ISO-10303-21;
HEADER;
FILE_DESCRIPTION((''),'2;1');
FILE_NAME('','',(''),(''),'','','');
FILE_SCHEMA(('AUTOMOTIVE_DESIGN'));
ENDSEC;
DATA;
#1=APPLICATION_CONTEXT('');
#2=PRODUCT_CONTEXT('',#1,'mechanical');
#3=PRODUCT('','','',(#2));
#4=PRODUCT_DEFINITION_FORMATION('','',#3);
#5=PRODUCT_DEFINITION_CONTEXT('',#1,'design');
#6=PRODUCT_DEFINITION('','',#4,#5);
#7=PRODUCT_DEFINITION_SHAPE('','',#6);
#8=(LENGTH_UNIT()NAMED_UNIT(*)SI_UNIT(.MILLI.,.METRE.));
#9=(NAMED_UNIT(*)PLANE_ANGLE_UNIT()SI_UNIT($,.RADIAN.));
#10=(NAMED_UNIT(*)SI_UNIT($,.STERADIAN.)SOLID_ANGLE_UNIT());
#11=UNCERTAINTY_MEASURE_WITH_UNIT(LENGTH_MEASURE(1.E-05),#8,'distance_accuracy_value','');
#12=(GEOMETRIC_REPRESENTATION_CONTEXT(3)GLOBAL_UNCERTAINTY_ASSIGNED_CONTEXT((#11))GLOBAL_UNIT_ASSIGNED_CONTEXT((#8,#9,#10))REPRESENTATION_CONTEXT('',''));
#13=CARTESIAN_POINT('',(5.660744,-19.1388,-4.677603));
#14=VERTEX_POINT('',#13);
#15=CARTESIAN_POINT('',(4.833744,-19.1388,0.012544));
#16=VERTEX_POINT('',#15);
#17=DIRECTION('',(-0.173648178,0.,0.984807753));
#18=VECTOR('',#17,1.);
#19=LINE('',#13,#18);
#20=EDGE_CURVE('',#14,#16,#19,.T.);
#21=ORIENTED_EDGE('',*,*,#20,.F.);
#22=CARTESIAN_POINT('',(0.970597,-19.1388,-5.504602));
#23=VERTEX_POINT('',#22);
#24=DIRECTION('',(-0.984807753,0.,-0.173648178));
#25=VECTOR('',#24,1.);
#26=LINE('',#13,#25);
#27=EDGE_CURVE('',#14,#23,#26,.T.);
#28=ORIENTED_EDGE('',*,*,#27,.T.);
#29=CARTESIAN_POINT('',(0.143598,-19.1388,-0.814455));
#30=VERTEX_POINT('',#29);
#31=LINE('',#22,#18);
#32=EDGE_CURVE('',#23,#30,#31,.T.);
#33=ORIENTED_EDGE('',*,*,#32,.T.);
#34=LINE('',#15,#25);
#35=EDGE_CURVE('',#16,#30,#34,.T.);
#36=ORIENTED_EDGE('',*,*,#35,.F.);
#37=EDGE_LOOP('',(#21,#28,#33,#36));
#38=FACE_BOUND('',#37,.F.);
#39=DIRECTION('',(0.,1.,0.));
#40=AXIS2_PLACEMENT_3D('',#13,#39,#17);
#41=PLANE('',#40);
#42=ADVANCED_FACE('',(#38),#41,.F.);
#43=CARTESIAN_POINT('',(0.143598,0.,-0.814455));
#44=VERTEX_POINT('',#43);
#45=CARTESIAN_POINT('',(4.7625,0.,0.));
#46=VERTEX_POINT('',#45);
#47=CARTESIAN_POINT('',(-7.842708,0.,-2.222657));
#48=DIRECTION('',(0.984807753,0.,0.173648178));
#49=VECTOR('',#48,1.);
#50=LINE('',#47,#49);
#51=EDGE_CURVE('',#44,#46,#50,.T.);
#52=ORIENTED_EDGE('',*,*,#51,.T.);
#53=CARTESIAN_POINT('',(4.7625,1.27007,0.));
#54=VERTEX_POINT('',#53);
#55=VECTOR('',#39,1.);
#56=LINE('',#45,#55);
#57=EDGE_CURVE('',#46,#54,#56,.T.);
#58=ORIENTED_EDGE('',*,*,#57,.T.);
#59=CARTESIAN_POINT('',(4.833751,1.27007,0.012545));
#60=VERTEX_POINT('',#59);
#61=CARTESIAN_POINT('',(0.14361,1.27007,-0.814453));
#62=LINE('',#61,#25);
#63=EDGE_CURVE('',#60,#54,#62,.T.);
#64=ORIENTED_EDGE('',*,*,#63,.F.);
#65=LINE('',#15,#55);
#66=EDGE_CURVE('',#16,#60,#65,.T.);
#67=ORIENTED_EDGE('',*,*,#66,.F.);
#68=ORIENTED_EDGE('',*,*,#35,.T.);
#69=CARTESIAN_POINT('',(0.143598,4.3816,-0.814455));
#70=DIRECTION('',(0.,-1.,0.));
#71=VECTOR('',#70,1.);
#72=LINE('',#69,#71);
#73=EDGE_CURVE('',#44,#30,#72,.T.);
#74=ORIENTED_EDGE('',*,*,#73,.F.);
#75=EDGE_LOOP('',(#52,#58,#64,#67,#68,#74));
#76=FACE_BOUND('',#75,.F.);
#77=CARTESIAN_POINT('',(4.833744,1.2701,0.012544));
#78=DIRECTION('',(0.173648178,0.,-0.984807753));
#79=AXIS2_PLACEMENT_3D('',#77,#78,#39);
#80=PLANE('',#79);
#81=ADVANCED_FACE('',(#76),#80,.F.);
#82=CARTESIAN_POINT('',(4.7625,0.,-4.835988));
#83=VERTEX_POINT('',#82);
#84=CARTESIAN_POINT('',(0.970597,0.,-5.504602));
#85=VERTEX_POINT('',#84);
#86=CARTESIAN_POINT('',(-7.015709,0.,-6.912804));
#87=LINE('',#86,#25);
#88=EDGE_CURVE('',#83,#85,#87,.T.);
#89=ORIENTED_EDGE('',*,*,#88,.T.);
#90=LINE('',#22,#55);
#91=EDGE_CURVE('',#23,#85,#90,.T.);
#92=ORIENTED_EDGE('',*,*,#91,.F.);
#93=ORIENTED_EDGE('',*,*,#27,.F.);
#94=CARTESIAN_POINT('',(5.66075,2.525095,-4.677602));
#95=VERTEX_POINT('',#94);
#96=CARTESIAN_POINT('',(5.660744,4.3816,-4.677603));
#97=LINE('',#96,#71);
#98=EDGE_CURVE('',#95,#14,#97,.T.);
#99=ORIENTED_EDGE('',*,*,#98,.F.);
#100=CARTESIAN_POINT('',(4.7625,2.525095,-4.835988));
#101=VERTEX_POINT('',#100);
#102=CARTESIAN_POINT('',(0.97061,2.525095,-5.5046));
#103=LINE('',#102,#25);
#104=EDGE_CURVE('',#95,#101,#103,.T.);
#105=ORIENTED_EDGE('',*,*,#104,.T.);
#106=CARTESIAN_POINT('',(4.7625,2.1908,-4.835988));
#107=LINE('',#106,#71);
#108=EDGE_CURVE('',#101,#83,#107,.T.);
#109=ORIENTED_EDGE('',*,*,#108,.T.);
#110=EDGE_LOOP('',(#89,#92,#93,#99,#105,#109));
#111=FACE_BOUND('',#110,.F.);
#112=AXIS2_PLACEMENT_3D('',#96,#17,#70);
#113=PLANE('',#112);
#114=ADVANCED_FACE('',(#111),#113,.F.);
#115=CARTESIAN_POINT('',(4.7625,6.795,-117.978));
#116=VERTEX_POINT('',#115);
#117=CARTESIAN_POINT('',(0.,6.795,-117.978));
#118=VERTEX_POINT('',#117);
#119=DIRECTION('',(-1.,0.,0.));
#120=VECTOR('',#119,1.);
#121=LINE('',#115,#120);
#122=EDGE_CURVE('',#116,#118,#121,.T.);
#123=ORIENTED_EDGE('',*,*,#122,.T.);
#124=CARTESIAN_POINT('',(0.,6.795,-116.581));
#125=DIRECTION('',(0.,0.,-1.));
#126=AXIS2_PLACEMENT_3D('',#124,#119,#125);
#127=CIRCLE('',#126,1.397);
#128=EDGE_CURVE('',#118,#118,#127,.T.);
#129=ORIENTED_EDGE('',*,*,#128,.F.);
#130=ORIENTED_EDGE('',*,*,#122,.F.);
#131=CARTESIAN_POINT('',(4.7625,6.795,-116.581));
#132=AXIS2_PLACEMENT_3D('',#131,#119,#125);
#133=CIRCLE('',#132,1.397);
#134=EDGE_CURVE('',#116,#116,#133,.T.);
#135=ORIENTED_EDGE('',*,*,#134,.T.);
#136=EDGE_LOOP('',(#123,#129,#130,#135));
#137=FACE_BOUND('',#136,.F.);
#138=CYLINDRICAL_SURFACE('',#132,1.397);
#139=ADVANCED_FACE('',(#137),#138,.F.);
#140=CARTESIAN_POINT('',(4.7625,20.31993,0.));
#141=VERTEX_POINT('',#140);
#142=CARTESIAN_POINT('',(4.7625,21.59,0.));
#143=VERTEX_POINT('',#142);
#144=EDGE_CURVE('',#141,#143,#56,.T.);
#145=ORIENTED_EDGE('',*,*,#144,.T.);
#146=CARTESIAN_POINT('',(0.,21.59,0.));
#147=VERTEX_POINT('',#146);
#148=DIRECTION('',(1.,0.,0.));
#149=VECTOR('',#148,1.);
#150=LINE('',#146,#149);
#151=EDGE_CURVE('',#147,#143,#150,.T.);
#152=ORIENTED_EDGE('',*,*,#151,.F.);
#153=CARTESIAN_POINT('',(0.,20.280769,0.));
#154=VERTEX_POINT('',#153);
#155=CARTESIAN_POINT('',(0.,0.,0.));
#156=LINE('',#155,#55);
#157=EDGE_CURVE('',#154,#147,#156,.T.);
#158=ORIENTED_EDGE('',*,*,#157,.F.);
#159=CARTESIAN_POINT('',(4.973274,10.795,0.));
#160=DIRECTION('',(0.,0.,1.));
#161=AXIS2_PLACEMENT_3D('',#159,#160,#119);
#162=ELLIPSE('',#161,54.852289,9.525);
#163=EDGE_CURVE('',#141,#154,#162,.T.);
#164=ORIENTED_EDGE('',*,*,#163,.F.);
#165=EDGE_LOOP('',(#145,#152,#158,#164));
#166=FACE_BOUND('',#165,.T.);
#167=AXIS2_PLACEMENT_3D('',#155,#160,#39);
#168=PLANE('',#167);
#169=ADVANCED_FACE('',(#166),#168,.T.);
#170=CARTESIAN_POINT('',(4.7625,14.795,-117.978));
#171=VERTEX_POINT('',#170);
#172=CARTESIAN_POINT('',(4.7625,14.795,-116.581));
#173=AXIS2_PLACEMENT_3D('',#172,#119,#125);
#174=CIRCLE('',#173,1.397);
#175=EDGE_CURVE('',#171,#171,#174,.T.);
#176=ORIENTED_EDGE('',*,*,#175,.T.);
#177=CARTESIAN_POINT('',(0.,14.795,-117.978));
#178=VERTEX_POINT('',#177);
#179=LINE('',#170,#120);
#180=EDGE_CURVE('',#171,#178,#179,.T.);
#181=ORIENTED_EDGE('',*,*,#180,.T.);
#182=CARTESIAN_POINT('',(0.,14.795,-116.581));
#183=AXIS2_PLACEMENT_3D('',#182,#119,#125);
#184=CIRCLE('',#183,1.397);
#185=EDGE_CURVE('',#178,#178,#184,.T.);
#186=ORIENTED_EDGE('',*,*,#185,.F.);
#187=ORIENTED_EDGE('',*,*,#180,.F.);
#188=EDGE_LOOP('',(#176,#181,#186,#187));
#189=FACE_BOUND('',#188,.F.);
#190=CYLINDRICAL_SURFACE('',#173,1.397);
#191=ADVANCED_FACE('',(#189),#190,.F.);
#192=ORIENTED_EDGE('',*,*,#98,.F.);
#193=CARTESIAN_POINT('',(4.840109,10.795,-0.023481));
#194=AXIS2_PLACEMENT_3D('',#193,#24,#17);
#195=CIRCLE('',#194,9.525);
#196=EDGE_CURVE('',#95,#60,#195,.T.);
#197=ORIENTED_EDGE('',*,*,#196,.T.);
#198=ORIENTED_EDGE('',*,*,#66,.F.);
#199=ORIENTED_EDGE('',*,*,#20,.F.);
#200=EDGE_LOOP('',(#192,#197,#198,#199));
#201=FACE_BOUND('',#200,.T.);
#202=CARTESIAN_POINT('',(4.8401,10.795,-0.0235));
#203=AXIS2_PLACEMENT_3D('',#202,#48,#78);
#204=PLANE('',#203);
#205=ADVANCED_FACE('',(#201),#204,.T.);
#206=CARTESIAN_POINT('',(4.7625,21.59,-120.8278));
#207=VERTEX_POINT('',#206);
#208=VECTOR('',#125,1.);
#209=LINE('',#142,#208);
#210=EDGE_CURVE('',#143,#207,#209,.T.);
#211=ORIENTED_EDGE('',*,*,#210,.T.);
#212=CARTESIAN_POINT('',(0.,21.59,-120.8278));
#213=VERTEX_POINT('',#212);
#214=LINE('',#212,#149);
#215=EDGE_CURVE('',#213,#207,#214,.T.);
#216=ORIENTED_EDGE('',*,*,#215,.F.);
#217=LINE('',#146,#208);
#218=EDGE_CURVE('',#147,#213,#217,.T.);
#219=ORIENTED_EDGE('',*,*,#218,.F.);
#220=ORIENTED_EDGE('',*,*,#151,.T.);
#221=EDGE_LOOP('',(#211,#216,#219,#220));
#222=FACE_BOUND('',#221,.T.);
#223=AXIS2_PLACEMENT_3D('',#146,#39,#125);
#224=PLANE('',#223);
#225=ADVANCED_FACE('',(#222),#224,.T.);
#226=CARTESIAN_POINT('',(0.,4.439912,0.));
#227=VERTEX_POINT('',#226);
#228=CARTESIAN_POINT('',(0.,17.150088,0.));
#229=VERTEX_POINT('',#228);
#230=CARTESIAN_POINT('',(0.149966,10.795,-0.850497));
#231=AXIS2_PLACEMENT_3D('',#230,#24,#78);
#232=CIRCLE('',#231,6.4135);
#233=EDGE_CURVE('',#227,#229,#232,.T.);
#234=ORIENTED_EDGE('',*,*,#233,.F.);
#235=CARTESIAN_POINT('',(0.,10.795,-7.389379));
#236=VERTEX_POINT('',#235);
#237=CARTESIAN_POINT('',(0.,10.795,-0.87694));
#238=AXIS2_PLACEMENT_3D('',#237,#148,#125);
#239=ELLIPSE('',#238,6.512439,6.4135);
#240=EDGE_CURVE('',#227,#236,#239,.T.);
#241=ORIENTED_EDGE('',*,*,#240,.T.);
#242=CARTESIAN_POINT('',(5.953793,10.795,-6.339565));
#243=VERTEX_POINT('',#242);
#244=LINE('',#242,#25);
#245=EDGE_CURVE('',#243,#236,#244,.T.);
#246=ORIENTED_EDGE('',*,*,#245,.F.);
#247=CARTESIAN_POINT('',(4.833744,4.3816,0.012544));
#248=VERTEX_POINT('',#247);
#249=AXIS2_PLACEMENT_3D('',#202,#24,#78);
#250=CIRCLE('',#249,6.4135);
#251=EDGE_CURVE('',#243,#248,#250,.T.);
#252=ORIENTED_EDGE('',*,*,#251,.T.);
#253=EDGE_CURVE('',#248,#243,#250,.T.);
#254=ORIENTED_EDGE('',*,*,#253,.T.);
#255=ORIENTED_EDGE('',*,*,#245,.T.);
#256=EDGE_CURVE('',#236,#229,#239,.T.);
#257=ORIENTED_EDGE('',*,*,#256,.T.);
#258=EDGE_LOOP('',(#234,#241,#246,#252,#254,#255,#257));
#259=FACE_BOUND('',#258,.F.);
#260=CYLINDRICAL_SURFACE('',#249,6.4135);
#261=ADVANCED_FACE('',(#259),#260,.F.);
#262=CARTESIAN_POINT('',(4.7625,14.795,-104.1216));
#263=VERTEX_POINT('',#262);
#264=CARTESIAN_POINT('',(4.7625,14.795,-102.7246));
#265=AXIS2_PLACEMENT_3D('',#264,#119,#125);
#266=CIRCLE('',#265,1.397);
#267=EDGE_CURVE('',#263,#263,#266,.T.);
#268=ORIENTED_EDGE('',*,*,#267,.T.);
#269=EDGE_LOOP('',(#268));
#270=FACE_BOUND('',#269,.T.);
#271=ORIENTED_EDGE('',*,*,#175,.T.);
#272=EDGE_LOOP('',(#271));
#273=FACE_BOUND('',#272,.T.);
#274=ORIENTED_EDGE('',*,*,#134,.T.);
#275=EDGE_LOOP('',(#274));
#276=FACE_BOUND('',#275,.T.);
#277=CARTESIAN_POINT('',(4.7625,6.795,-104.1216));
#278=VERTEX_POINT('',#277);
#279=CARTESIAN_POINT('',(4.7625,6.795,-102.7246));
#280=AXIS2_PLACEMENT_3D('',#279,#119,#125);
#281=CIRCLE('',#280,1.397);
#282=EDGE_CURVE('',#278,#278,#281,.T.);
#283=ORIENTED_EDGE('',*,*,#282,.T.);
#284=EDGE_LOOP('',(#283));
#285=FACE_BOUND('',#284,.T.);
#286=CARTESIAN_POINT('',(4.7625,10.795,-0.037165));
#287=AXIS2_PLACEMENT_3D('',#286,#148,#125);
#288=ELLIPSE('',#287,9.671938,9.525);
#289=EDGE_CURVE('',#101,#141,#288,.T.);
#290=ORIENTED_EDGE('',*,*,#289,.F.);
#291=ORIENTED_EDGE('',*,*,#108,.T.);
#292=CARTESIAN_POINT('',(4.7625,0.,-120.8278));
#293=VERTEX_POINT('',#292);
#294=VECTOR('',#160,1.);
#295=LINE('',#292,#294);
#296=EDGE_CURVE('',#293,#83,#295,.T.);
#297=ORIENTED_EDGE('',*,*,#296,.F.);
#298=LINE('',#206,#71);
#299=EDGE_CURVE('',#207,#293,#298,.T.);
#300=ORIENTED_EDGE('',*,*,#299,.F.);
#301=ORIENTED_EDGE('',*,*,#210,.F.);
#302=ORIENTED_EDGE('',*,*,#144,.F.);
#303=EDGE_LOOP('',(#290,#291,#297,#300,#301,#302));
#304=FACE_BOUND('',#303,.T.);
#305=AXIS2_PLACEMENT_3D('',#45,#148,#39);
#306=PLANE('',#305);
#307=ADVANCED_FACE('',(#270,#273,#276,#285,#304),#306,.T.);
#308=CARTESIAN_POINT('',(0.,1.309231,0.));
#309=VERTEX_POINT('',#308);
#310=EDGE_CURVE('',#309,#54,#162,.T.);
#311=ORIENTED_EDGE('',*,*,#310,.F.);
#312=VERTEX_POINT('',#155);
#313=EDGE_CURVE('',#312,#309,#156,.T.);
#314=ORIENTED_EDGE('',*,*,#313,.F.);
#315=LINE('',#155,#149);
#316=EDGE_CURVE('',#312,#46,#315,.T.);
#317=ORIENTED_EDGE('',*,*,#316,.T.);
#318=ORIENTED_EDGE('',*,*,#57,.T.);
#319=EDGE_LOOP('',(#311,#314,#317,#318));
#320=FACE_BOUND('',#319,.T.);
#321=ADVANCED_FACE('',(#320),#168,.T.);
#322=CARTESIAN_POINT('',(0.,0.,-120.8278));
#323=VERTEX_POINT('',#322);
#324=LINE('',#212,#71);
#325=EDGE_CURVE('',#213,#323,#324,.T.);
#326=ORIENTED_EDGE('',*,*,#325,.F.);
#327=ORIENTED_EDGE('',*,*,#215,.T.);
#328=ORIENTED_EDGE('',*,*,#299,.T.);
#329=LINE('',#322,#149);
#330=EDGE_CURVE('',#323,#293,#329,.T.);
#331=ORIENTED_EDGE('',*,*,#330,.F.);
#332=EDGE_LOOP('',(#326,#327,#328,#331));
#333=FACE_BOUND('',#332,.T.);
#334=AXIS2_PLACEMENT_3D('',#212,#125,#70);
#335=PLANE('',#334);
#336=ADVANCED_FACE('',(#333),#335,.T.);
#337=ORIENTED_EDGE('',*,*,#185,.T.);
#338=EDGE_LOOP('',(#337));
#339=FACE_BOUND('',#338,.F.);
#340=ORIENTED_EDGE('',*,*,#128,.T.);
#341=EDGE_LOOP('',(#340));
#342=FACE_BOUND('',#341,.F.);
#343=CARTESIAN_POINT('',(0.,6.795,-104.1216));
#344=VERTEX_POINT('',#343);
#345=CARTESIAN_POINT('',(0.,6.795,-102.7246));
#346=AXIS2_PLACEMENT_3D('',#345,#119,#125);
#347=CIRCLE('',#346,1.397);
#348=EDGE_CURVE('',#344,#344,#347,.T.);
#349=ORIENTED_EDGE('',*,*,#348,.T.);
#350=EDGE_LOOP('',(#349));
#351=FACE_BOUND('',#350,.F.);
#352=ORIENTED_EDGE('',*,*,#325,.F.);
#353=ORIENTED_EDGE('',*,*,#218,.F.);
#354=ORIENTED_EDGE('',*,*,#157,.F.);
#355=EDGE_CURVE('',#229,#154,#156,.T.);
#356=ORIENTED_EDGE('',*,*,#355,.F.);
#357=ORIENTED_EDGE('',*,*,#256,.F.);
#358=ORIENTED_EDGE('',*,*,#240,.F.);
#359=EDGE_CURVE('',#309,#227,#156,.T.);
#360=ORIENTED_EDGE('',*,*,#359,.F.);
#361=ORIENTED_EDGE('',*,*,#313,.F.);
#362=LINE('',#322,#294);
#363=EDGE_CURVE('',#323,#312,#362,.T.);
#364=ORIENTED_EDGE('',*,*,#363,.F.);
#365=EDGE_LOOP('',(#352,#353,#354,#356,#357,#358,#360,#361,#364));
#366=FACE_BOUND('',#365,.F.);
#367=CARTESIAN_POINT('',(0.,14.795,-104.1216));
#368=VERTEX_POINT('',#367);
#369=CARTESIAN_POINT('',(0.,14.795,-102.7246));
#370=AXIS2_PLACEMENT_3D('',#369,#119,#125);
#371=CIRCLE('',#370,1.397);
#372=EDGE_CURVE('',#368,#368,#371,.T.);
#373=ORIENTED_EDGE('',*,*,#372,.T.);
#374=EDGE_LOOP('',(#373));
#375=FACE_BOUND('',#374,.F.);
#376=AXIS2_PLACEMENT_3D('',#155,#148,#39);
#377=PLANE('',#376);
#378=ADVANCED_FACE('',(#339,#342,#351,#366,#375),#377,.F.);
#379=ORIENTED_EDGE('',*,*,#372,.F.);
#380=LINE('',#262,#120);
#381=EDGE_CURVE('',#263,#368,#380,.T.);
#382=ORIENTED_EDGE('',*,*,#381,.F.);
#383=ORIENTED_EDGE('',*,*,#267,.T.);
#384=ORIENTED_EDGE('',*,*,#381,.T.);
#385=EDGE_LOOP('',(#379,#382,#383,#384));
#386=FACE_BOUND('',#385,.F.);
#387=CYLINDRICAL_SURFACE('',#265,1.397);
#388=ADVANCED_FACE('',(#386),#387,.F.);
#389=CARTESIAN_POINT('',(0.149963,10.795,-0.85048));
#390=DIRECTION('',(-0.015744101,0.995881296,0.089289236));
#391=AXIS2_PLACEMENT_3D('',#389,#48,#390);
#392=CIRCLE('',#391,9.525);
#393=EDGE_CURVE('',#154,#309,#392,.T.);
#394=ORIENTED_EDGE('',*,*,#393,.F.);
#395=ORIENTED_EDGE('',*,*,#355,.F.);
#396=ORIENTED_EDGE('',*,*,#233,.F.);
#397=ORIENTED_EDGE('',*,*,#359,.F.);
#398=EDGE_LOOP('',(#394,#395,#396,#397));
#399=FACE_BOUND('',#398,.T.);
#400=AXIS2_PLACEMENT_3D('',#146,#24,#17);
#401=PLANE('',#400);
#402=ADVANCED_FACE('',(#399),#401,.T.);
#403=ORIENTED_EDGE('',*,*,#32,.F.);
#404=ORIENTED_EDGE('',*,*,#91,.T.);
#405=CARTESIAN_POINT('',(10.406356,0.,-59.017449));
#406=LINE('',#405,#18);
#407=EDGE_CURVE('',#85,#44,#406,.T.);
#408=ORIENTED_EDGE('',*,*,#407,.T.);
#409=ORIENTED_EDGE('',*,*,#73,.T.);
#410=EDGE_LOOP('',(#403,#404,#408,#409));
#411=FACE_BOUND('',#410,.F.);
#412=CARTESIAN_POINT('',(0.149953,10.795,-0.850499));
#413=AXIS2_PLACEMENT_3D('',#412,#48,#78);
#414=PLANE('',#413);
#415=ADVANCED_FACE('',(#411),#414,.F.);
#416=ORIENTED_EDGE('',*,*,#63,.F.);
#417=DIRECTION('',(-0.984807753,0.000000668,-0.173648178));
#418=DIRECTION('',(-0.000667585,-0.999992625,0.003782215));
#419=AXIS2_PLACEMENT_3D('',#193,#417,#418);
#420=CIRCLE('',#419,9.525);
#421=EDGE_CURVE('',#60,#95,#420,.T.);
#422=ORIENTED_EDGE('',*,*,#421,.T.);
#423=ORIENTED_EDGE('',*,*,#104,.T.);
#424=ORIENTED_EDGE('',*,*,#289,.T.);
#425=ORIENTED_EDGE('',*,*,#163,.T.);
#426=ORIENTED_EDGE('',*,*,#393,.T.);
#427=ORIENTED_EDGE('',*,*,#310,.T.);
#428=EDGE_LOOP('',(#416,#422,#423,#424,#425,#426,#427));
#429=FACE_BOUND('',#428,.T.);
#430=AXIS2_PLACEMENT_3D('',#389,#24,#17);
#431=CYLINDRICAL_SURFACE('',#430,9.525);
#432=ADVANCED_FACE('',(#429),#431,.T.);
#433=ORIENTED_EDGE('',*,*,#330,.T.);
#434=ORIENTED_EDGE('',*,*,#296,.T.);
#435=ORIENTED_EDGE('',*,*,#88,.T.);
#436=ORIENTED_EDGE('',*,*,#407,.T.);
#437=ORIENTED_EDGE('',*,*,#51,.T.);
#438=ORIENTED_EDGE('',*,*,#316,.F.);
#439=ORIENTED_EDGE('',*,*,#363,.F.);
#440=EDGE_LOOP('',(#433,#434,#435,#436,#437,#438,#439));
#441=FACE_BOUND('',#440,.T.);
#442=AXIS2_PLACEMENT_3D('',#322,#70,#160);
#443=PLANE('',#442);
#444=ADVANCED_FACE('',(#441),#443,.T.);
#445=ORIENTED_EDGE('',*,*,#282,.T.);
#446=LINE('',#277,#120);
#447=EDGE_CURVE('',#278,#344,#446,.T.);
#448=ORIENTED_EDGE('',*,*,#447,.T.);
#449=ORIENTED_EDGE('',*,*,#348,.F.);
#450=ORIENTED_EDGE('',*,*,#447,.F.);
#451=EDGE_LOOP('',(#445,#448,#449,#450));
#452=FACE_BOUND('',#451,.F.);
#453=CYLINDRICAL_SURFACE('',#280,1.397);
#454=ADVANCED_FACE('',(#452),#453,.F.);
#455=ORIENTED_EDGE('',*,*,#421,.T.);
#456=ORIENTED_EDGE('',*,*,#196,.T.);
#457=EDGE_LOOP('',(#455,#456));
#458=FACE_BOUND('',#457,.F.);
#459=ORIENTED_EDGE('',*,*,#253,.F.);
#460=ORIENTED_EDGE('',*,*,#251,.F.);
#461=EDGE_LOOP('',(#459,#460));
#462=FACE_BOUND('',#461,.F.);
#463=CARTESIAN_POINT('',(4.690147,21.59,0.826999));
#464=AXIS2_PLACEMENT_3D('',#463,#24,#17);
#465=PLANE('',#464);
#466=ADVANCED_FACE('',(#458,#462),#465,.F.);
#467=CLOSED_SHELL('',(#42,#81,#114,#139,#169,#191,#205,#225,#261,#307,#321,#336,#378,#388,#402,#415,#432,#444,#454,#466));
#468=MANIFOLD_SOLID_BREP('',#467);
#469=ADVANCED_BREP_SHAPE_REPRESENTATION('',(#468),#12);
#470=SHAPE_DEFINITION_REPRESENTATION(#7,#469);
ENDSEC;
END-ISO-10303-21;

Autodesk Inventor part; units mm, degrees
ref_plane "YZ Plane" through (0, 0, 0) normal (1, 0, 0) x (0, 1, 0)
ref_plane "XZ Plane" through (0, 0, 0) normal (0, 1, 0) x (-1, 0, 0)
ref_plane "XY Plane" through (0, 0, 0) normal (0, 0, 1) x (1, 0, 0)
sketch "Sketch1" plane through (0, 0, 0) normal (1, 0, 0) x (0, 1, 0)
  line L0 (0, 0) -> (21.59, 0)
  line L1 (21.59, 0) -> (21.59, -120.8278)
  line L2 (21.59, -120.8278) -> (0, -120.8278)
  line L3 (0, -120.8278) -> (0, 0)
  dimension "d0" = 21.59
  dimension "d1" = 120.8278
extrude "Extrusion1" add sketch "Sketch1" along normal blind 4.7625
sketch "Sketch2" plane through (0, 21.59, 0) normal (0, 1, 0) x (1, 0, 0)
  line L0 (0, 0) -> (-3.2071, -18.1884)
  line L1 (0, 0) -> (18.469, 0) construction
  line L2 (0, 0) -> (13.0579, -2.3025)
  line L3 (0, 0) -> (13.2594, 0) construction
  dimension "d4" = 100
  dimension "d24" = 10
ref_plane "Work Plane1" through (0, 21.59, 0) normal (-0.9848078, 0, -0.1736482) x (-0.1736482, 0, 0.9848078)
sketch "Sketch3" plane through (0, 21.59, 0) normal (-0.9848078, 0, -0.1736482) x (-0.1736482, 0, 0.9848078)
  line L0 (-0.827, 0) -> (-0.827, -21.59) projected
  line L1 (-0.827, -21.59) -> (-119.8192, -21.59) projected
  line L2 (-119.8192, -21.59) -> (-119.8192, 0) projected
  line L3 (-119.8192, 0) -> (-0.827, 0) projected
  line L4 (0, -21.59) -> (0, 0) projected
  line L5 (0, -21.59) -> (-0.827, -21.59) projected
  line L6 (-0.827, 0) -> (-0.827, -21.59) projected
  line L7 (0, 0) -> (-0.827, 0) projected
  line L8 (0, -21.59) -> (0, 0) projected
  circle A0 centre (-0.8636, -10.795) radius 9.525
  dimension "d6" = 21.59
  dimension "d50" = 19.05
  dimension "d51" = 0.8636
extrude "Extrusion2" add sketch "Sketch3" against normal blind 4.7625 contours A0 L4 L0 | L0 A0 | A0 L4
ref_plane "Work Plane3" through (0, 0, 0) normal (-0.1736482, 0, 0.9848078) x (0, 1, 0)
sketch "Sketch9" plane through (4.7625, 0, 0) normal (1, 0, 0) x (0, 0, -1)
  line L0 (0, 21.59) -> (0, 20.3199) projected
  line L1 (0, 0) -> (120.8278, 0) projected
  line L2 (120.8278, 0) -> (120.8278, 21.59) projected
  line L3 (120.8278, 21.59) -> (0, 21.59) projected
  circle A0 centre (109.6528, 10.795) radius 8
  line L4 (102.7246, 14.795) -> (116.581, 14.795)
  line L5 (116.581, 14.795) -> (116.581, 6.795)
  line L6 (116.581, 6.795) -> (102.7246, 6.795)
  line L7 (102.7246, 6.795) -> (102.7246, 14.795)
  ellipse E0 centre (0.0372, 10.795) end of major axis (9.7091, 10.795) minor radius 9.525 (0, 1.2701) -> (0, 20.3199) ccw projected
  line L8 (0, 1.2701) -> (0, 0) projected
  dimension "d34" = 16
  dimension "d35" = 8
  dimension "d36" = 4
  dimension "d37" = 21.59
  dimension "d38" = 10.795
  dimension "d39" = 11.175
hole "Hole3" at (4.7625, 14.795, -102.7246) at (4.7625, 6.795, -102.7246) at (4.7625, 14.795, -116.581) at (4.7625, 6.795, -116.581) direction (-1, 0, 0) diameter 2.794 end through all
sketch "Sketch11" plane through (4.8401, 10.795, -0.0235) normal (0.9848078, 0, 0.1736482) x (0.1736482, 0, -0.9848078)
  circle A0 centre (0, 0) radius 9.525 projected
  point P0 (-0.8636, -10.795)
hole "Hole4" at (4.8401, 10.795, -0.0235) direction (-0.9848078, 0, -0.1736482) diameter 12.827 end through all
sketch "Sketch12" plane through (4.8401, 10.795, -0.0235) normal (0.9848078, 0, 0.1736482) x (0.1736482, 0, -0.9848078)
  circle A0 centre (0, 0) radius 6.4135 projected
  circle A1 centre (0, 0) radius 9.525 projected
  ellipse E0 centre (114.7733, 4) end of major axis (114.7733, 2.603) minor radius 1.3758 projected
  ellipse E1 centre (101.1274, 4) end of major axis (101.1274, 2.603) minor radius 1.3758 projected
  ellipse E2 centre (101.1274, -4) end of major axis (101.1274, -5.397) minor radius 1.3758 projected
  ellipse E3 centre (114.7733, -4) end of major axis (114.7733, -5.397) minor radius 1.3758 projected
  arc A2 (-0.0366, -9.5249) -> (-0.0366, 9.5249) centre (0, 0) ccw projected
  line L0 (-0.0366, -9.5249) -> (-0.0366, -10.795) projected
  line L1 (-0.0366, -10.795) -> (118.9556, -10.795) projected
  line L2 (118.9556, -10.795) -> (118.9556, 10.795) projected
  line L3 (118.9556, 10.795) -> (-0.0366, 10.795) projected
  line L4 (-0.0366, 10.795) -> (-0.0366, 9.5249) projected
  line L5 (-0.0366, -6.4134) -> (4.7259, -6.4134)
  line L6 (4.7259, -6.4134) -> (4.7259, -29.9338)
  line L7 (4.7259, -29.9338) -> (-0.0366, -29.9338)
  line L8 (-0.0366, -29.9338) -> (-0.0366, -6.4134)
  point P0 (-0.8636, -10.795)
  dimension "d59" = 4.7625
  dimension "d60" = 23.5204
extrude "Extrusion5" add sketch "Sketch12" against normal blind 4.7625 contours L5 L6 A1 L8 | A1 L6 L1 L0 | L1 L6 L7 L8 picked at (2.6364, -7.2637)
equation "\"d36\" = 0.5 * d35"
equation "\"d38\" = 0.5 * d37"
properties part number "WheelIntakeMotorMount2.0"
